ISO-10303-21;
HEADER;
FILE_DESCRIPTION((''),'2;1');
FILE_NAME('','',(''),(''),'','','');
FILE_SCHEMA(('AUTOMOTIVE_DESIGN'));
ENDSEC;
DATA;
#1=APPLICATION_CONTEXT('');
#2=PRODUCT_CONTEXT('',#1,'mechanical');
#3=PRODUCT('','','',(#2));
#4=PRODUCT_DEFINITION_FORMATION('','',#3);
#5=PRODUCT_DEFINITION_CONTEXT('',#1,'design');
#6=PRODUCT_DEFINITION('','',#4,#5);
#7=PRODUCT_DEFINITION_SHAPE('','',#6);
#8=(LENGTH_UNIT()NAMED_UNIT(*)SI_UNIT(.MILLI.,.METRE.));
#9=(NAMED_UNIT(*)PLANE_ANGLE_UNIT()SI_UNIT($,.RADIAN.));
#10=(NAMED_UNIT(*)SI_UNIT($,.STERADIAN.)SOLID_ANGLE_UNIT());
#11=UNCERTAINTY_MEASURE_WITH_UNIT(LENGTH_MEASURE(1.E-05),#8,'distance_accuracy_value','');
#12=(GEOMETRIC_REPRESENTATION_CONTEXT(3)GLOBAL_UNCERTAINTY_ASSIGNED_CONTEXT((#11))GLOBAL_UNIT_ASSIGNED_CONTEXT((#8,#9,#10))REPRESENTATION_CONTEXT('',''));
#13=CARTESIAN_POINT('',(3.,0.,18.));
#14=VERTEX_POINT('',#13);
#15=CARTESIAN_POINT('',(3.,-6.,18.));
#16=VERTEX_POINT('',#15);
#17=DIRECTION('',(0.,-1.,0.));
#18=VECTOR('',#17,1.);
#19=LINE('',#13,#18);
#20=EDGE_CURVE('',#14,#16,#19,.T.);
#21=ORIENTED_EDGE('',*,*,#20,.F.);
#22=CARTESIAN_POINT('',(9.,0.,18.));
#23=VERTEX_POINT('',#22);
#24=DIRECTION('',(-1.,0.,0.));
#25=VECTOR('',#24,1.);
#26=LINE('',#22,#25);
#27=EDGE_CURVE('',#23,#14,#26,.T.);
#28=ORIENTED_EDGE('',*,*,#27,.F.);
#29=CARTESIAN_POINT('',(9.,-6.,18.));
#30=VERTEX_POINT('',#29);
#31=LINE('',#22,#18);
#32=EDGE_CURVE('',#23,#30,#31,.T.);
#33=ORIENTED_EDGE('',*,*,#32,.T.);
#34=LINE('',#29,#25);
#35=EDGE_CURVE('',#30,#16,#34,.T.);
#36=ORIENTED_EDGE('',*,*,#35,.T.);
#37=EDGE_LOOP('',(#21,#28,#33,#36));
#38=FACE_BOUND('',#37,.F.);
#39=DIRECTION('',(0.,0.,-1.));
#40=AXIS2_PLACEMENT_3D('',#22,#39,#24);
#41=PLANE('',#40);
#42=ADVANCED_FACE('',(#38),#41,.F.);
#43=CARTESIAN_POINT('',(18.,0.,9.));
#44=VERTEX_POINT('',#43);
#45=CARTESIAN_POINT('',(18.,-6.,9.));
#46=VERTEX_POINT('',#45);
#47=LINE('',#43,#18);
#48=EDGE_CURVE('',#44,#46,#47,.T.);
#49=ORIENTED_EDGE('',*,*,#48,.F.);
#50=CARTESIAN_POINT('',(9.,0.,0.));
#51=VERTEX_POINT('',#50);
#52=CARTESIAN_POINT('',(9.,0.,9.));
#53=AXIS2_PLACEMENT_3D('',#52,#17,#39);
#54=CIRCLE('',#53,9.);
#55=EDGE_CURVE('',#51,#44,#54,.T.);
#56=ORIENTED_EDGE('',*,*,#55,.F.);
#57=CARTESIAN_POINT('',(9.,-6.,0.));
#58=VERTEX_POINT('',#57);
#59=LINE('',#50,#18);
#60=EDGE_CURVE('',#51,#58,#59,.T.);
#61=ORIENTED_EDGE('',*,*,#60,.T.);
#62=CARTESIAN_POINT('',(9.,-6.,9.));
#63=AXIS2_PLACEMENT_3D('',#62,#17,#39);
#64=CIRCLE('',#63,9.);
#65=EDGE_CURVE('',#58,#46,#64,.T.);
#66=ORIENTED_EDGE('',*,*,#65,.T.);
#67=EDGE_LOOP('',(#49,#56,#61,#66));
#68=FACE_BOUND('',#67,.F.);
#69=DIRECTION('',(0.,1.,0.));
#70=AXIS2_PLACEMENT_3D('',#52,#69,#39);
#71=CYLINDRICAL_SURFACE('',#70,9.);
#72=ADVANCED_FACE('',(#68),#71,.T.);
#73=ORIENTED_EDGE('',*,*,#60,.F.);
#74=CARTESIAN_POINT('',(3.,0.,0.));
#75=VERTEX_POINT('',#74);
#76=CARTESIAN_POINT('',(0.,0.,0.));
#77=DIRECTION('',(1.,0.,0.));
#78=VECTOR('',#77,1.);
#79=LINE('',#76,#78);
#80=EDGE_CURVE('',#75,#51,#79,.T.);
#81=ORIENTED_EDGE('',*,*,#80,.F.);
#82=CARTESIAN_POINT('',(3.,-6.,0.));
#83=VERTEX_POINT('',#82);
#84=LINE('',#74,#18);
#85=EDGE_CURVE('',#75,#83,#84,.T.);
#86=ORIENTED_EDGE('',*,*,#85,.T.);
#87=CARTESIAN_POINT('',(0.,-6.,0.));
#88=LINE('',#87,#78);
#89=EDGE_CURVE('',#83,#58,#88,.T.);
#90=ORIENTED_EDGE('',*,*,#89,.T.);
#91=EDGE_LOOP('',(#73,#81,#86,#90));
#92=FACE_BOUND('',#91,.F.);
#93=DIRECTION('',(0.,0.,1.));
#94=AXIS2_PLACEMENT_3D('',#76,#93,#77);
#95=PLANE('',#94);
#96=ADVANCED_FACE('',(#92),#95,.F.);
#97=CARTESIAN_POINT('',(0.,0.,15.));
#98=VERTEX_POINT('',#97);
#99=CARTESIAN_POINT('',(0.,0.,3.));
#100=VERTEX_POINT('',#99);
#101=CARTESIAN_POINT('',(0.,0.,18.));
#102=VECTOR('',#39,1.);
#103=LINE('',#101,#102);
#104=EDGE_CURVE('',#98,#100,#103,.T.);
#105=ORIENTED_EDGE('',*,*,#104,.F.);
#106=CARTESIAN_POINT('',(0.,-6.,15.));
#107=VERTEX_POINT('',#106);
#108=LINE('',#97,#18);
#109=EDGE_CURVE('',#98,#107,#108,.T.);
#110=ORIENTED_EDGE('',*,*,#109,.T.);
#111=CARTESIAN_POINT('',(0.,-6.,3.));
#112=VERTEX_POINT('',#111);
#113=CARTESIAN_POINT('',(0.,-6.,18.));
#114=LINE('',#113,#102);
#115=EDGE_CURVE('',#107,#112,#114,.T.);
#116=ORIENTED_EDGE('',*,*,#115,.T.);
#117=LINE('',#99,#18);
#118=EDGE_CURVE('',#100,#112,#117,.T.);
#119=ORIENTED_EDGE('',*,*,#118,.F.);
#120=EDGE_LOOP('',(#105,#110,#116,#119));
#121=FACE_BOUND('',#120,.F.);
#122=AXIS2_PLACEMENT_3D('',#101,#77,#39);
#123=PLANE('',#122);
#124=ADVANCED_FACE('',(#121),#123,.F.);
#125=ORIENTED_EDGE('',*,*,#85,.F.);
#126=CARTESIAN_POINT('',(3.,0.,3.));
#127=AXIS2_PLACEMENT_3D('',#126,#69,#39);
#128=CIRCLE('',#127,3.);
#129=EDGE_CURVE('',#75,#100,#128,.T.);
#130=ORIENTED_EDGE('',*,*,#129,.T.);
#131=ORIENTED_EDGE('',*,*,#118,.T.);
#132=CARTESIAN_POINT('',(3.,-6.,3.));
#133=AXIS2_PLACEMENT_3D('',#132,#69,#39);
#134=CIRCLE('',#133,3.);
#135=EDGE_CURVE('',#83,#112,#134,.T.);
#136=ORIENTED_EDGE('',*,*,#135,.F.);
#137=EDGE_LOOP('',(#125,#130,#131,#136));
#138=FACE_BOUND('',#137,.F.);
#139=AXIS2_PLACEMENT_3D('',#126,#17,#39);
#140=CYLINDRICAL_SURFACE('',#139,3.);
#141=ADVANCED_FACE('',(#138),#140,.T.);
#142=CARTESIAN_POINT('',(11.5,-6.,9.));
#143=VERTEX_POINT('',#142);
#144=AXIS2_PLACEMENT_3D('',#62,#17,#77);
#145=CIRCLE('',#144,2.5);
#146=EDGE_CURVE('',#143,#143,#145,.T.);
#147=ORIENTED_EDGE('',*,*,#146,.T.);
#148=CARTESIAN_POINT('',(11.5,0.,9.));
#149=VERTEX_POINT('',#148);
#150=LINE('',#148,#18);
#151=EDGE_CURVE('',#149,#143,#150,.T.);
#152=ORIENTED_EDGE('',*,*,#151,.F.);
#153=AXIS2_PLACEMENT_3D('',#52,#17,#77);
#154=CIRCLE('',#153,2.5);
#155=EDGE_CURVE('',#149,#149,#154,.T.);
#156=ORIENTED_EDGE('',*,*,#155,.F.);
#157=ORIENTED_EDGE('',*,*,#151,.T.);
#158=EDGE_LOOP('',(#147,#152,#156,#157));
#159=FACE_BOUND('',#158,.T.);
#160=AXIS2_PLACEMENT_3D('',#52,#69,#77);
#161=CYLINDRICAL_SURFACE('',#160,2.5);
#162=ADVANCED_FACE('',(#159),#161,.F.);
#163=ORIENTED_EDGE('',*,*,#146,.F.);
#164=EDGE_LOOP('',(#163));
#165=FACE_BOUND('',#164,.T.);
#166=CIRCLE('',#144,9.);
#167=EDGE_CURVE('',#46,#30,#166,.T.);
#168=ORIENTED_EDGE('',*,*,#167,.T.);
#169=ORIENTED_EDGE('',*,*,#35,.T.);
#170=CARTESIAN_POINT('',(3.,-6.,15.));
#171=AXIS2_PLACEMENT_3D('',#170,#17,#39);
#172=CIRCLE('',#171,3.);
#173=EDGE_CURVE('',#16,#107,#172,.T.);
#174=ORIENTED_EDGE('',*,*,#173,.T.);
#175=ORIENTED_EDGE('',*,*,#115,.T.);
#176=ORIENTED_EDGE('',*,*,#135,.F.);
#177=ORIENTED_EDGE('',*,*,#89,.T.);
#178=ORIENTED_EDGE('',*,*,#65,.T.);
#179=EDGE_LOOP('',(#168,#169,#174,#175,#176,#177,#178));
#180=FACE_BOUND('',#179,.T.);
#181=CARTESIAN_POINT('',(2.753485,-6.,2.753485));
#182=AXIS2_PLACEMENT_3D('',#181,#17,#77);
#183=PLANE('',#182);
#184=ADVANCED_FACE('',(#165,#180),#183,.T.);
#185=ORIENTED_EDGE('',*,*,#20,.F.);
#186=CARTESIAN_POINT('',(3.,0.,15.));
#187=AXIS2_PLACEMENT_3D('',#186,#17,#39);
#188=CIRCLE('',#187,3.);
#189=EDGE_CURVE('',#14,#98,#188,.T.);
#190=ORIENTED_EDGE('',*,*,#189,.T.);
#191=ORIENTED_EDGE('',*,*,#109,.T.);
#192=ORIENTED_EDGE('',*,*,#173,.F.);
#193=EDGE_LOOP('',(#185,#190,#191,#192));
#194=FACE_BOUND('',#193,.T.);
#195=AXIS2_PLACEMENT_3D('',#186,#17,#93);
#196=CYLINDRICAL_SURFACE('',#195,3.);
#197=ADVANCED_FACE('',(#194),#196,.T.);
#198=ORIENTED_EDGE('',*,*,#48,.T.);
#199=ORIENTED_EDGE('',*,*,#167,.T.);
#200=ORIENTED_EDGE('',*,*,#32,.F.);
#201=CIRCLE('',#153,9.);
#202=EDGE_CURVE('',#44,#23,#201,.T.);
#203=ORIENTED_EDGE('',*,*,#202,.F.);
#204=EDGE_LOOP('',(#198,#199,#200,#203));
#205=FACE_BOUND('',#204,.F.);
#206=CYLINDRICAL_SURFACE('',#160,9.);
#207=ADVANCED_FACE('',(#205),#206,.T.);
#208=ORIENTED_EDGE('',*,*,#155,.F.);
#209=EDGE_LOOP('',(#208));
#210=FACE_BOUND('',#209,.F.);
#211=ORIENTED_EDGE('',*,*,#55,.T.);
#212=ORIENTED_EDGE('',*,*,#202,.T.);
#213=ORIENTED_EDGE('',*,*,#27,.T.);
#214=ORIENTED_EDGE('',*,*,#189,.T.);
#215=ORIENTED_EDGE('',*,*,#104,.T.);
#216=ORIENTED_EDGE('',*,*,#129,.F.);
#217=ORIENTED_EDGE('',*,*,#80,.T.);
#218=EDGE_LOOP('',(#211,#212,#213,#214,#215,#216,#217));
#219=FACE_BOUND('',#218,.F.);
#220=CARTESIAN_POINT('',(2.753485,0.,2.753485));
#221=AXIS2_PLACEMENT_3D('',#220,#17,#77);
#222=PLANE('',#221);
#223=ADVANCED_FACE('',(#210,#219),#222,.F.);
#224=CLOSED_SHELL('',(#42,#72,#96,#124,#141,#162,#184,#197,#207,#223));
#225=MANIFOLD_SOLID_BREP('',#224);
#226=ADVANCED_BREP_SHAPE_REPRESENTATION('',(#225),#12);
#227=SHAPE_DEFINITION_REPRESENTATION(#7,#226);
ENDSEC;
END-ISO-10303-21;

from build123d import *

# Parameters (mm, degrees)
F0_R     = 2.5
F1_DEPTH = 6
F2_R     = 3


with BuildPart() as f1:
    # F0 (on Front) → F1 (new body)
    with BuildSketch(Plane.XZ):
        with BuildLine():
            Line((0, 9), (0, 0))
            Line((0, 0), (9, 0))
            ThreePointArc((9, 0), (2.6360389693, 2.6360389693), (0, 9))
        make_face()
        with BuildLine():
            ThreePointArc((0, 9), (2.6360389693, 2.6360389693), (9, 0))
            ThreePointArc((9, 0), (15.3639610307, 2.6360389693), (18, 9))
            ThreePointArc((18, 9), (15.3639610307, 15.3639610307), (9, 18))
            ThreePointArc((9, 18), (2.6360389693, 15.3639610307), (0, 9))
        make_face()
        with Locations((9, 9)):
            Circle(F0_R, mode=Mode.SUBTRACT)
        with BuildLine():
            Line((0, 18), (0, 9))
            ThreePointArc((0, 9), (2.6360389693, 15.3639610307), (9, 18))
            Line((9, 18), (0, 18))
        make_face()
    extrude(amount=F1_DEPTH)

    # F2
    f2_edges = [f1.edges().sort_by_distance(p)[0] for p in [
        (0, -3, 18),
        (0, -3, 0),
    ]]
    fillet(f2_edges, radius=F2_R)


solid = f1.part
